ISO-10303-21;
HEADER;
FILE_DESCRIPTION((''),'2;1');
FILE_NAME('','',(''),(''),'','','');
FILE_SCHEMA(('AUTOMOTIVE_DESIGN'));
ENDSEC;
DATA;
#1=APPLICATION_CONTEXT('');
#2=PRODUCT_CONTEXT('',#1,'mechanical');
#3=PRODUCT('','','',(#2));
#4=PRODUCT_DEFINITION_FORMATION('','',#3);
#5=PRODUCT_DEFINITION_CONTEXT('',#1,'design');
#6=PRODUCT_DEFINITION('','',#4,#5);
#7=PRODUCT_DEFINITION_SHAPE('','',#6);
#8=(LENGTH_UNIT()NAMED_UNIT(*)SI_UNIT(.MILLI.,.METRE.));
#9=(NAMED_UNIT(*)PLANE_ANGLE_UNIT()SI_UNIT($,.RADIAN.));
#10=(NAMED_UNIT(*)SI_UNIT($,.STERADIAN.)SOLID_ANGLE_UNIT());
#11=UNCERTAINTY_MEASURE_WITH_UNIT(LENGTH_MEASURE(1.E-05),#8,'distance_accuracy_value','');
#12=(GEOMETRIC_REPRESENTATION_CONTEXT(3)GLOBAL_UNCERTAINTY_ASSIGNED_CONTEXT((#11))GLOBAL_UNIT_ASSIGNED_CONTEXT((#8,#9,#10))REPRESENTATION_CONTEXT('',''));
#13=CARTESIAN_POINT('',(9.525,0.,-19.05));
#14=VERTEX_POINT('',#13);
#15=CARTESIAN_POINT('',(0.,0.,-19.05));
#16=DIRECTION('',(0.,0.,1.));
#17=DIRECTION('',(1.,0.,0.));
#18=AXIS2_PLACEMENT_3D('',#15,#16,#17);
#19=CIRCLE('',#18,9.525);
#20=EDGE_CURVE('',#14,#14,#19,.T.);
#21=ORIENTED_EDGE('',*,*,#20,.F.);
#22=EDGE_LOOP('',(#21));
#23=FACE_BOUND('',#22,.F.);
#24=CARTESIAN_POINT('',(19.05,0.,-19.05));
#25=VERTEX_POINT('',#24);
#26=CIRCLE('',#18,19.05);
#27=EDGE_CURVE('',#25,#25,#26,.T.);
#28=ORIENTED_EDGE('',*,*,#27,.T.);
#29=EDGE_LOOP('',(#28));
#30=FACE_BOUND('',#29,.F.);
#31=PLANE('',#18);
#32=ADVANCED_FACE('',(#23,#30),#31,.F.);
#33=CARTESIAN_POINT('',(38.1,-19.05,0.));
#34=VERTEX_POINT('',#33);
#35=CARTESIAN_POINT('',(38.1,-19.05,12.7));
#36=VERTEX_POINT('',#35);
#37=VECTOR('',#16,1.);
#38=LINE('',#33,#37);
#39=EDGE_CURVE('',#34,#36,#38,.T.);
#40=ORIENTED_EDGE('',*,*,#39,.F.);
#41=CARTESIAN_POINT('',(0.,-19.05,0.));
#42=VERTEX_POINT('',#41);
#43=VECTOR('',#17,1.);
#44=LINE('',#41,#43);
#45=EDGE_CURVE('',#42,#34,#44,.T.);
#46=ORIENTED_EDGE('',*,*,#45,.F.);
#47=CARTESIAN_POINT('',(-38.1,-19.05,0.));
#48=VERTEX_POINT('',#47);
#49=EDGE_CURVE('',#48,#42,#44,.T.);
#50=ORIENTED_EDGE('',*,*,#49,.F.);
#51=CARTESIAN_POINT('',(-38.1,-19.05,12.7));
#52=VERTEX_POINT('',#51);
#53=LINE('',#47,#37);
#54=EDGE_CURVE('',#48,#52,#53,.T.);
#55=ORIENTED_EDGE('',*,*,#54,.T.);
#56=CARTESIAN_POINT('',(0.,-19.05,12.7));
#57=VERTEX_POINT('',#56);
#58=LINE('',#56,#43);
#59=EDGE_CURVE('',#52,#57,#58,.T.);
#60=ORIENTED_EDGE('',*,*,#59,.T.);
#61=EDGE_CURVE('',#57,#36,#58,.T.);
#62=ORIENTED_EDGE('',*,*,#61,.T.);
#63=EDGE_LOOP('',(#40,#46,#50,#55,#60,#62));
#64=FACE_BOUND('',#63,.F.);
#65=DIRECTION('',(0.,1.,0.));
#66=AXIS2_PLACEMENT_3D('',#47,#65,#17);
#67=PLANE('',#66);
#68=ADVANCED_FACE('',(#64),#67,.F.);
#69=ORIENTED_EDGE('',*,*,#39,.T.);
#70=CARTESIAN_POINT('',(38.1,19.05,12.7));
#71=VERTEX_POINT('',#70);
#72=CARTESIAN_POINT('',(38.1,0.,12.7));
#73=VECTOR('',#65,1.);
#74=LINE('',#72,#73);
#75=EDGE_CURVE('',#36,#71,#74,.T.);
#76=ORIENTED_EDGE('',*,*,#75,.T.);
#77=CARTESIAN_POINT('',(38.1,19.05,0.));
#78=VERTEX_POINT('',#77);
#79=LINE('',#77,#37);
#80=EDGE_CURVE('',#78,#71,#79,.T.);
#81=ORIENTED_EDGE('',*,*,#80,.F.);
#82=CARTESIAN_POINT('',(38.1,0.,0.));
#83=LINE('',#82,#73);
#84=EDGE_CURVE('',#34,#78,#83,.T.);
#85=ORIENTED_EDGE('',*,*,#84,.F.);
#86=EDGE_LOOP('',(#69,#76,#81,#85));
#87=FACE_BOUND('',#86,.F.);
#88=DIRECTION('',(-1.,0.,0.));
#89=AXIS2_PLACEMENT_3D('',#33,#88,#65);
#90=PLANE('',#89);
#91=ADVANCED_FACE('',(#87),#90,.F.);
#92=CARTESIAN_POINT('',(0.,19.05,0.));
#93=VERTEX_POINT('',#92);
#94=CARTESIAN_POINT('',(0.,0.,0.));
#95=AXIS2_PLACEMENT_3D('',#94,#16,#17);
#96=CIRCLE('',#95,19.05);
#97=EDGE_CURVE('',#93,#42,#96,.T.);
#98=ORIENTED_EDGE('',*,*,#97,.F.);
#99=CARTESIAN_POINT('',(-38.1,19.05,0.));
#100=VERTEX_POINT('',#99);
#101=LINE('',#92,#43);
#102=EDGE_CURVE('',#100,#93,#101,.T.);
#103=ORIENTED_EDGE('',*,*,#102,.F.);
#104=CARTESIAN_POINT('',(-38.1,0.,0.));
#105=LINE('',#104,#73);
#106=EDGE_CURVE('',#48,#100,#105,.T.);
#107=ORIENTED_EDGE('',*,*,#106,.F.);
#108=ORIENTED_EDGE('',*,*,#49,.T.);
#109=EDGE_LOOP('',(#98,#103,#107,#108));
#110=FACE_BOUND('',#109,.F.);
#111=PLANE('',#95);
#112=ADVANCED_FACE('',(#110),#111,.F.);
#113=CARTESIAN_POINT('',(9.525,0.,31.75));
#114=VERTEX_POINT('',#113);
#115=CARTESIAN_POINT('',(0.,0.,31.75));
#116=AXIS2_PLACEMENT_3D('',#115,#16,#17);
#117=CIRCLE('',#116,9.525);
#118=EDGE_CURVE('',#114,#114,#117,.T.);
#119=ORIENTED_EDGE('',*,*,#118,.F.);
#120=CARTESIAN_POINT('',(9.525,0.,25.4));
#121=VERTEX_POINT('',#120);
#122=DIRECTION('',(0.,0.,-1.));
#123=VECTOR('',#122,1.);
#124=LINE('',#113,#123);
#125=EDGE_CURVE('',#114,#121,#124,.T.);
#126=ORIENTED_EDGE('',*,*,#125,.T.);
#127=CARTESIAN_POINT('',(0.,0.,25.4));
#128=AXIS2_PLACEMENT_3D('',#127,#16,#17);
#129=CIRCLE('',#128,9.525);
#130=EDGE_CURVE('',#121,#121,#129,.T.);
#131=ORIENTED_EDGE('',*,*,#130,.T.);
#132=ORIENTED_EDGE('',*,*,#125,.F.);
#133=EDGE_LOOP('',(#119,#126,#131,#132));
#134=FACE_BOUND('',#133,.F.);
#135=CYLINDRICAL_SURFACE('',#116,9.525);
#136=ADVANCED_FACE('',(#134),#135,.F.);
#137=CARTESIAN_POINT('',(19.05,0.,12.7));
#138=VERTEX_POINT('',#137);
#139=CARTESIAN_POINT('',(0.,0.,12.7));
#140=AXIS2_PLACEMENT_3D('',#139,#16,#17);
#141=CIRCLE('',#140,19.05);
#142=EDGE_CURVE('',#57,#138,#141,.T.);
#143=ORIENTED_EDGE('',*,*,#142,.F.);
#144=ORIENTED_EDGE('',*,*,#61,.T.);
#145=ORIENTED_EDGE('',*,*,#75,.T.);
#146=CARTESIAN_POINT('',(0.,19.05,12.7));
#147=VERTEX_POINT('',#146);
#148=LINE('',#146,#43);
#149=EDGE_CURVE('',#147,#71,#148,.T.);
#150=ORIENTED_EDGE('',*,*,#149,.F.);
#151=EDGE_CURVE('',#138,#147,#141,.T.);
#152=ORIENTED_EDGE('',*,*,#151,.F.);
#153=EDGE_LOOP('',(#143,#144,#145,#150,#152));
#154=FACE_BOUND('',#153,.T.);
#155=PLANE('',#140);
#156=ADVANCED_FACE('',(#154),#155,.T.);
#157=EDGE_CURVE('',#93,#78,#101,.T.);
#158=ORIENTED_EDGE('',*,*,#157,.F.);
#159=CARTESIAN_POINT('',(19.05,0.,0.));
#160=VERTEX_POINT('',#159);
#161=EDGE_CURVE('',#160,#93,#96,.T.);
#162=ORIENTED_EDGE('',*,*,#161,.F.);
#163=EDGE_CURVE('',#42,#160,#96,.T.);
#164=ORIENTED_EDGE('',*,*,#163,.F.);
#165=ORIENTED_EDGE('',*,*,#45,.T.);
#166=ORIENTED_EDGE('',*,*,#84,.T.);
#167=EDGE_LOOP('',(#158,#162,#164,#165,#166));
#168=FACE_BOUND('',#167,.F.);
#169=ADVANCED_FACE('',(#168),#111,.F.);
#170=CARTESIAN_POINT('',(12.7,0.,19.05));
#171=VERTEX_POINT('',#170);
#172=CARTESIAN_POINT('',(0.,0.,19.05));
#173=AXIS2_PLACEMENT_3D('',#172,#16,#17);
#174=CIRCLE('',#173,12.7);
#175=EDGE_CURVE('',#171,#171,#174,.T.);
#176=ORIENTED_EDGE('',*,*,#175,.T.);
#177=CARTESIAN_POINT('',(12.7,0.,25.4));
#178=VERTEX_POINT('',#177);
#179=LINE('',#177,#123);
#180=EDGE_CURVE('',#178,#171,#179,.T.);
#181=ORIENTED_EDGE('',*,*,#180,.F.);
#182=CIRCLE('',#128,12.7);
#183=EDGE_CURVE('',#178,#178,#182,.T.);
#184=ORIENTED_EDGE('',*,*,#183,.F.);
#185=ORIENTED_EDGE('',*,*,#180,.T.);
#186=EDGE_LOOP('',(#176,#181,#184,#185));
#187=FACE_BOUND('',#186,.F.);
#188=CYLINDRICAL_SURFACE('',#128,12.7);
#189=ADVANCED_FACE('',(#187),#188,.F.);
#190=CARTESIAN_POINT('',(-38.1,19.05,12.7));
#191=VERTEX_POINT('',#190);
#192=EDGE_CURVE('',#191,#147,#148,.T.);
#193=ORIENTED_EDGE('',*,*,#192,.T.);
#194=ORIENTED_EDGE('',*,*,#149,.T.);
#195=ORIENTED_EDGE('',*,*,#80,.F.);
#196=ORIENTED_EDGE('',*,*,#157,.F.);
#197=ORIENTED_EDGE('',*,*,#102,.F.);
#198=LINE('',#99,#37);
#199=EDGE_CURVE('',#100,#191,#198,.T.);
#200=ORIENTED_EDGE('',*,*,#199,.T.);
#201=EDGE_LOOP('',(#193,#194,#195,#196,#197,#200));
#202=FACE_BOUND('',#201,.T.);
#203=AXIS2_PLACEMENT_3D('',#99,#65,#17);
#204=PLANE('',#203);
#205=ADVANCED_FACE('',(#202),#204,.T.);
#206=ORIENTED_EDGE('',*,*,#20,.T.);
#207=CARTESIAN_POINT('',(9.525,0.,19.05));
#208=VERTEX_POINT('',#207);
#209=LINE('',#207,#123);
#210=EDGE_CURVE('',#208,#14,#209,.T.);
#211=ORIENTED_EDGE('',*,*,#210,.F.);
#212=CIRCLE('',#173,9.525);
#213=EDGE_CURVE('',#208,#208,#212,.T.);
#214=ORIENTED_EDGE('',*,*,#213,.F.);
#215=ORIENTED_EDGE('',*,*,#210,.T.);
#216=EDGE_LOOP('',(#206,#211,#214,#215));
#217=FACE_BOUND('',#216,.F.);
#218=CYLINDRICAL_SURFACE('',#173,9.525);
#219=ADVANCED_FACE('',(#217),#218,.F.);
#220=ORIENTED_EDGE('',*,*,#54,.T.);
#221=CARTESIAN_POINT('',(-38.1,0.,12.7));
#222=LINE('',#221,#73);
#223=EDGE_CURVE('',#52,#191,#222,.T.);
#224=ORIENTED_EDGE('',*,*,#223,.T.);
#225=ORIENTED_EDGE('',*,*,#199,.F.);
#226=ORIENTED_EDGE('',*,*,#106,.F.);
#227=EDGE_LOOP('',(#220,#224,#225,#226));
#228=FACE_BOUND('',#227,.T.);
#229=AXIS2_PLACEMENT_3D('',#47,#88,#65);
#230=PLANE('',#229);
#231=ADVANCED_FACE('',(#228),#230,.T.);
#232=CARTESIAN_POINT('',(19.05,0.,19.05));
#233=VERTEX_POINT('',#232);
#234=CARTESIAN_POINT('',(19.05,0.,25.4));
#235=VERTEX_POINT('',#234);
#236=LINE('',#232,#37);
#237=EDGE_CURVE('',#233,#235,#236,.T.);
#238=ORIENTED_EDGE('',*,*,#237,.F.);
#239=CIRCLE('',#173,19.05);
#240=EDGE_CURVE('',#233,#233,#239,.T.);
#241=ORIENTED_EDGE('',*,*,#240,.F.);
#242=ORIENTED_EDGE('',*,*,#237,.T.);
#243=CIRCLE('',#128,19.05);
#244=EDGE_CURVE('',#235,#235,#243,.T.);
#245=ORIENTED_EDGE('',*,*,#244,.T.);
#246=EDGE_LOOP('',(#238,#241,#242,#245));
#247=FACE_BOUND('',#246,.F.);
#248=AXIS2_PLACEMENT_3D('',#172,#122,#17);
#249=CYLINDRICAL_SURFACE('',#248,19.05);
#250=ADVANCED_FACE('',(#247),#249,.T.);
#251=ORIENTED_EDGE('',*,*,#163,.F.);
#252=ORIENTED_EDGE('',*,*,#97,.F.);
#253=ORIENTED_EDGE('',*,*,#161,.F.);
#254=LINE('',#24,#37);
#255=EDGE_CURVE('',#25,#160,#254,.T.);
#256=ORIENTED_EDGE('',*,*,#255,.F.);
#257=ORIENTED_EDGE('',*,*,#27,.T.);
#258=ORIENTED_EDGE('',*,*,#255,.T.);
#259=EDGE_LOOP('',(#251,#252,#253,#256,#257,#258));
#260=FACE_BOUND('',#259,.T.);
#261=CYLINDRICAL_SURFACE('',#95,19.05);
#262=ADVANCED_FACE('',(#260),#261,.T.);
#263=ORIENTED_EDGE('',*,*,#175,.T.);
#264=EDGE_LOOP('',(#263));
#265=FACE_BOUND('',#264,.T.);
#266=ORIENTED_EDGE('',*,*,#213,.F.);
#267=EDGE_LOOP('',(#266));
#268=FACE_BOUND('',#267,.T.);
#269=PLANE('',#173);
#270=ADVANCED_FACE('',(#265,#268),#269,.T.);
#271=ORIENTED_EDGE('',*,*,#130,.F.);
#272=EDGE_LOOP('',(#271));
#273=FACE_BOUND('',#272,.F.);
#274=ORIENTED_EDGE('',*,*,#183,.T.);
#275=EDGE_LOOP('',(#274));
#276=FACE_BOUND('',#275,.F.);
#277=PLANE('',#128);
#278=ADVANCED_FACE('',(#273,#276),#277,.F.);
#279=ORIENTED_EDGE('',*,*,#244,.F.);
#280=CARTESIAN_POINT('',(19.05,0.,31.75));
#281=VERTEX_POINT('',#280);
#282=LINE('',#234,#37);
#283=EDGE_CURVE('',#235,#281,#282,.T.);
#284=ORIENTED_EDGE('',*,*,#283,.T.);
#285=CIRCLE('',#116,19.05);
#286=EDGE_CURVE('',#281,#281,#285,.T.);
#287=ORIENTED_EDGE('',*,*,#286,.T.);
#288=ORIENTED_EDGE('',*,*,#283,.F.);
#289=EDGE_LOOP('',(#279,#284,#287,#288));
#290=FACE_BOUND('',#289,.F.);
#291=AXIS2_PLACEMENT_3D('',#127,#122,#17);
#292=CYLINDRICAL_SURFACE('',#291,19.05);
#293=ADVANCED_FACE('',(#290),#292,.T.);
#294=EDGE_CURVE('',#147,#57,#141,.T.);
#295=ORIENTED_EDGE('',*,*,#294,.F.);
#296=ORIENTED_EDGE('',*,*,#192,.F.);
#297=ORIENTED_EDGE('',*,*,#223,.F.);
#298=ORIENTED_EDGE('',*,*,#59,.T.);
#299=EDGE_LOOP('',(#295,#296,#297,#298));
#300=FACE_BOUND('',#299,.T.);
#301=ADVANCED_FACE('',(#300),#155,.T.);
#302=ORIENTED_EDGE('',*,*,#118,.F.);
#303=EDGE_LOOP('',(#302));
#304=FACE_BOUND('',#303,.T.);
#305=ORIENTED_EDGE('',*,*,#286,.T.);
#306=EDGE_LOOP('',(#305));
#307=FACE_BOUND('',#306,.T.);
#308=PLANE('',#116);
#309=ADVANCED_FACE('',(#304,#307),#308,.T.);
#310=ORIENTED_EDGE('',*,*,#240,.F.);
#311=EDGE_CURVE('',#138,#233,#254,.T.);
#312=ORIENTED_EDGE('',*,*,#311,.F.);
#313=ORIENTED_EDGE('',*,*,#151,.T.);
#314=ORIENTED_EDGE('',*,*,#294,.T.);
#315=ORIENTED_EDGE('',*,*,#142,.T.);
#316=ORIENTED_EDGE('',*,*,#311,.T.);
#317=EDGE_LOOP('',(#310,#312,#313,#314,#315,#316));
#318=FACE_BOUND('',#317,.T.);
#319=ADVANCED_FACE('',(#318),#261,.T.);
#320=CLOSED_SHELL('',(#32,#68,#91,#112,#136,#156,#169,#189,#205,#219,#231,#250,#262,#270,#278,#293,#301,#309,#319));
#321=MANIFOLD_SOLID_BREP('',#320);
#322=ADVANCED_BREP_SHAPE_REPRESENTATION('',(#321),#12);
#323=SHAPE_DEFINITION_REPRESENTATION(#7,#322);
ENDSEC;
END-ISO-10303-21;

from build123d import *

# Parameters (mm, degrees)
F0_R      = 19.05
F1_DEPTH  = 19.05
F2_W      = 76.2
F2_H      = 38.1
F3_DEPTH  = 12.7
F4_R      = 9.525
F5_DEPTH  = 38.101
F6_R      = 19.05
F7_DEPTH  = 6.35
F8_R      = 12.7
F9_DEPTH  = 6.35
F10_R     = 19.05
F11_DEPTH = 6.35
F12_R     = 9.525
F13_DEPTH = 6.35


# Not quite as in the source:
# - a feature names something its author has since deleted; it is built from what else it names


with BuildPart() as f1:
    # F0 (on Top) → F1 (new body, symmetric)
    with BuildSketch(Plane.XY):
        Circle(F0_R)
    extrude(amount=F1_DEPTH, both=True)

    # F2 (on Top) → F3 (join)
    with BuildSketch(Plane.XY):
        Rectangle(F2_W, F2_H)
    extrude(amount=F3_DEPTH)

    # F4 (on face) → F5 (cut, through all)
    with BuildSketch(Plane.XY.offset(19.05)):
        Circle(F4_R)
    extrude(amount=-F5_DEPTH, mode=Mode.SUBTRACT)

    # F6 (on face) → F7 (join)
    with BuildSketch(Plane.XY.offset(19.05)):
        Circle(F6_R)
    extrude(amount=F7_DEPTH)

    # F8 (on face) → F9 (cut)
    with BuildSketch(Plane.XY.offset(25.4)):
        Circle(F8_R)
    extrude(amount=-F9_DEPTH, mode=Mode.SUBTRACT)

    # F10 (on face) → F11 (join)
    with BuildSketch(Plane.XY.offset(25.4)):
        Circle(F10_R)
    extrude(amount=F11_DEPTH)

    # F12 (on face) → F13 (cut)
    with BuildSketch(Plane.XY.offset(31.75)):
        Circle(F12_R)
    extrude(amount=-F13_DEPTH, mode=Mode.SUBTRACT)


solid = f1.part
